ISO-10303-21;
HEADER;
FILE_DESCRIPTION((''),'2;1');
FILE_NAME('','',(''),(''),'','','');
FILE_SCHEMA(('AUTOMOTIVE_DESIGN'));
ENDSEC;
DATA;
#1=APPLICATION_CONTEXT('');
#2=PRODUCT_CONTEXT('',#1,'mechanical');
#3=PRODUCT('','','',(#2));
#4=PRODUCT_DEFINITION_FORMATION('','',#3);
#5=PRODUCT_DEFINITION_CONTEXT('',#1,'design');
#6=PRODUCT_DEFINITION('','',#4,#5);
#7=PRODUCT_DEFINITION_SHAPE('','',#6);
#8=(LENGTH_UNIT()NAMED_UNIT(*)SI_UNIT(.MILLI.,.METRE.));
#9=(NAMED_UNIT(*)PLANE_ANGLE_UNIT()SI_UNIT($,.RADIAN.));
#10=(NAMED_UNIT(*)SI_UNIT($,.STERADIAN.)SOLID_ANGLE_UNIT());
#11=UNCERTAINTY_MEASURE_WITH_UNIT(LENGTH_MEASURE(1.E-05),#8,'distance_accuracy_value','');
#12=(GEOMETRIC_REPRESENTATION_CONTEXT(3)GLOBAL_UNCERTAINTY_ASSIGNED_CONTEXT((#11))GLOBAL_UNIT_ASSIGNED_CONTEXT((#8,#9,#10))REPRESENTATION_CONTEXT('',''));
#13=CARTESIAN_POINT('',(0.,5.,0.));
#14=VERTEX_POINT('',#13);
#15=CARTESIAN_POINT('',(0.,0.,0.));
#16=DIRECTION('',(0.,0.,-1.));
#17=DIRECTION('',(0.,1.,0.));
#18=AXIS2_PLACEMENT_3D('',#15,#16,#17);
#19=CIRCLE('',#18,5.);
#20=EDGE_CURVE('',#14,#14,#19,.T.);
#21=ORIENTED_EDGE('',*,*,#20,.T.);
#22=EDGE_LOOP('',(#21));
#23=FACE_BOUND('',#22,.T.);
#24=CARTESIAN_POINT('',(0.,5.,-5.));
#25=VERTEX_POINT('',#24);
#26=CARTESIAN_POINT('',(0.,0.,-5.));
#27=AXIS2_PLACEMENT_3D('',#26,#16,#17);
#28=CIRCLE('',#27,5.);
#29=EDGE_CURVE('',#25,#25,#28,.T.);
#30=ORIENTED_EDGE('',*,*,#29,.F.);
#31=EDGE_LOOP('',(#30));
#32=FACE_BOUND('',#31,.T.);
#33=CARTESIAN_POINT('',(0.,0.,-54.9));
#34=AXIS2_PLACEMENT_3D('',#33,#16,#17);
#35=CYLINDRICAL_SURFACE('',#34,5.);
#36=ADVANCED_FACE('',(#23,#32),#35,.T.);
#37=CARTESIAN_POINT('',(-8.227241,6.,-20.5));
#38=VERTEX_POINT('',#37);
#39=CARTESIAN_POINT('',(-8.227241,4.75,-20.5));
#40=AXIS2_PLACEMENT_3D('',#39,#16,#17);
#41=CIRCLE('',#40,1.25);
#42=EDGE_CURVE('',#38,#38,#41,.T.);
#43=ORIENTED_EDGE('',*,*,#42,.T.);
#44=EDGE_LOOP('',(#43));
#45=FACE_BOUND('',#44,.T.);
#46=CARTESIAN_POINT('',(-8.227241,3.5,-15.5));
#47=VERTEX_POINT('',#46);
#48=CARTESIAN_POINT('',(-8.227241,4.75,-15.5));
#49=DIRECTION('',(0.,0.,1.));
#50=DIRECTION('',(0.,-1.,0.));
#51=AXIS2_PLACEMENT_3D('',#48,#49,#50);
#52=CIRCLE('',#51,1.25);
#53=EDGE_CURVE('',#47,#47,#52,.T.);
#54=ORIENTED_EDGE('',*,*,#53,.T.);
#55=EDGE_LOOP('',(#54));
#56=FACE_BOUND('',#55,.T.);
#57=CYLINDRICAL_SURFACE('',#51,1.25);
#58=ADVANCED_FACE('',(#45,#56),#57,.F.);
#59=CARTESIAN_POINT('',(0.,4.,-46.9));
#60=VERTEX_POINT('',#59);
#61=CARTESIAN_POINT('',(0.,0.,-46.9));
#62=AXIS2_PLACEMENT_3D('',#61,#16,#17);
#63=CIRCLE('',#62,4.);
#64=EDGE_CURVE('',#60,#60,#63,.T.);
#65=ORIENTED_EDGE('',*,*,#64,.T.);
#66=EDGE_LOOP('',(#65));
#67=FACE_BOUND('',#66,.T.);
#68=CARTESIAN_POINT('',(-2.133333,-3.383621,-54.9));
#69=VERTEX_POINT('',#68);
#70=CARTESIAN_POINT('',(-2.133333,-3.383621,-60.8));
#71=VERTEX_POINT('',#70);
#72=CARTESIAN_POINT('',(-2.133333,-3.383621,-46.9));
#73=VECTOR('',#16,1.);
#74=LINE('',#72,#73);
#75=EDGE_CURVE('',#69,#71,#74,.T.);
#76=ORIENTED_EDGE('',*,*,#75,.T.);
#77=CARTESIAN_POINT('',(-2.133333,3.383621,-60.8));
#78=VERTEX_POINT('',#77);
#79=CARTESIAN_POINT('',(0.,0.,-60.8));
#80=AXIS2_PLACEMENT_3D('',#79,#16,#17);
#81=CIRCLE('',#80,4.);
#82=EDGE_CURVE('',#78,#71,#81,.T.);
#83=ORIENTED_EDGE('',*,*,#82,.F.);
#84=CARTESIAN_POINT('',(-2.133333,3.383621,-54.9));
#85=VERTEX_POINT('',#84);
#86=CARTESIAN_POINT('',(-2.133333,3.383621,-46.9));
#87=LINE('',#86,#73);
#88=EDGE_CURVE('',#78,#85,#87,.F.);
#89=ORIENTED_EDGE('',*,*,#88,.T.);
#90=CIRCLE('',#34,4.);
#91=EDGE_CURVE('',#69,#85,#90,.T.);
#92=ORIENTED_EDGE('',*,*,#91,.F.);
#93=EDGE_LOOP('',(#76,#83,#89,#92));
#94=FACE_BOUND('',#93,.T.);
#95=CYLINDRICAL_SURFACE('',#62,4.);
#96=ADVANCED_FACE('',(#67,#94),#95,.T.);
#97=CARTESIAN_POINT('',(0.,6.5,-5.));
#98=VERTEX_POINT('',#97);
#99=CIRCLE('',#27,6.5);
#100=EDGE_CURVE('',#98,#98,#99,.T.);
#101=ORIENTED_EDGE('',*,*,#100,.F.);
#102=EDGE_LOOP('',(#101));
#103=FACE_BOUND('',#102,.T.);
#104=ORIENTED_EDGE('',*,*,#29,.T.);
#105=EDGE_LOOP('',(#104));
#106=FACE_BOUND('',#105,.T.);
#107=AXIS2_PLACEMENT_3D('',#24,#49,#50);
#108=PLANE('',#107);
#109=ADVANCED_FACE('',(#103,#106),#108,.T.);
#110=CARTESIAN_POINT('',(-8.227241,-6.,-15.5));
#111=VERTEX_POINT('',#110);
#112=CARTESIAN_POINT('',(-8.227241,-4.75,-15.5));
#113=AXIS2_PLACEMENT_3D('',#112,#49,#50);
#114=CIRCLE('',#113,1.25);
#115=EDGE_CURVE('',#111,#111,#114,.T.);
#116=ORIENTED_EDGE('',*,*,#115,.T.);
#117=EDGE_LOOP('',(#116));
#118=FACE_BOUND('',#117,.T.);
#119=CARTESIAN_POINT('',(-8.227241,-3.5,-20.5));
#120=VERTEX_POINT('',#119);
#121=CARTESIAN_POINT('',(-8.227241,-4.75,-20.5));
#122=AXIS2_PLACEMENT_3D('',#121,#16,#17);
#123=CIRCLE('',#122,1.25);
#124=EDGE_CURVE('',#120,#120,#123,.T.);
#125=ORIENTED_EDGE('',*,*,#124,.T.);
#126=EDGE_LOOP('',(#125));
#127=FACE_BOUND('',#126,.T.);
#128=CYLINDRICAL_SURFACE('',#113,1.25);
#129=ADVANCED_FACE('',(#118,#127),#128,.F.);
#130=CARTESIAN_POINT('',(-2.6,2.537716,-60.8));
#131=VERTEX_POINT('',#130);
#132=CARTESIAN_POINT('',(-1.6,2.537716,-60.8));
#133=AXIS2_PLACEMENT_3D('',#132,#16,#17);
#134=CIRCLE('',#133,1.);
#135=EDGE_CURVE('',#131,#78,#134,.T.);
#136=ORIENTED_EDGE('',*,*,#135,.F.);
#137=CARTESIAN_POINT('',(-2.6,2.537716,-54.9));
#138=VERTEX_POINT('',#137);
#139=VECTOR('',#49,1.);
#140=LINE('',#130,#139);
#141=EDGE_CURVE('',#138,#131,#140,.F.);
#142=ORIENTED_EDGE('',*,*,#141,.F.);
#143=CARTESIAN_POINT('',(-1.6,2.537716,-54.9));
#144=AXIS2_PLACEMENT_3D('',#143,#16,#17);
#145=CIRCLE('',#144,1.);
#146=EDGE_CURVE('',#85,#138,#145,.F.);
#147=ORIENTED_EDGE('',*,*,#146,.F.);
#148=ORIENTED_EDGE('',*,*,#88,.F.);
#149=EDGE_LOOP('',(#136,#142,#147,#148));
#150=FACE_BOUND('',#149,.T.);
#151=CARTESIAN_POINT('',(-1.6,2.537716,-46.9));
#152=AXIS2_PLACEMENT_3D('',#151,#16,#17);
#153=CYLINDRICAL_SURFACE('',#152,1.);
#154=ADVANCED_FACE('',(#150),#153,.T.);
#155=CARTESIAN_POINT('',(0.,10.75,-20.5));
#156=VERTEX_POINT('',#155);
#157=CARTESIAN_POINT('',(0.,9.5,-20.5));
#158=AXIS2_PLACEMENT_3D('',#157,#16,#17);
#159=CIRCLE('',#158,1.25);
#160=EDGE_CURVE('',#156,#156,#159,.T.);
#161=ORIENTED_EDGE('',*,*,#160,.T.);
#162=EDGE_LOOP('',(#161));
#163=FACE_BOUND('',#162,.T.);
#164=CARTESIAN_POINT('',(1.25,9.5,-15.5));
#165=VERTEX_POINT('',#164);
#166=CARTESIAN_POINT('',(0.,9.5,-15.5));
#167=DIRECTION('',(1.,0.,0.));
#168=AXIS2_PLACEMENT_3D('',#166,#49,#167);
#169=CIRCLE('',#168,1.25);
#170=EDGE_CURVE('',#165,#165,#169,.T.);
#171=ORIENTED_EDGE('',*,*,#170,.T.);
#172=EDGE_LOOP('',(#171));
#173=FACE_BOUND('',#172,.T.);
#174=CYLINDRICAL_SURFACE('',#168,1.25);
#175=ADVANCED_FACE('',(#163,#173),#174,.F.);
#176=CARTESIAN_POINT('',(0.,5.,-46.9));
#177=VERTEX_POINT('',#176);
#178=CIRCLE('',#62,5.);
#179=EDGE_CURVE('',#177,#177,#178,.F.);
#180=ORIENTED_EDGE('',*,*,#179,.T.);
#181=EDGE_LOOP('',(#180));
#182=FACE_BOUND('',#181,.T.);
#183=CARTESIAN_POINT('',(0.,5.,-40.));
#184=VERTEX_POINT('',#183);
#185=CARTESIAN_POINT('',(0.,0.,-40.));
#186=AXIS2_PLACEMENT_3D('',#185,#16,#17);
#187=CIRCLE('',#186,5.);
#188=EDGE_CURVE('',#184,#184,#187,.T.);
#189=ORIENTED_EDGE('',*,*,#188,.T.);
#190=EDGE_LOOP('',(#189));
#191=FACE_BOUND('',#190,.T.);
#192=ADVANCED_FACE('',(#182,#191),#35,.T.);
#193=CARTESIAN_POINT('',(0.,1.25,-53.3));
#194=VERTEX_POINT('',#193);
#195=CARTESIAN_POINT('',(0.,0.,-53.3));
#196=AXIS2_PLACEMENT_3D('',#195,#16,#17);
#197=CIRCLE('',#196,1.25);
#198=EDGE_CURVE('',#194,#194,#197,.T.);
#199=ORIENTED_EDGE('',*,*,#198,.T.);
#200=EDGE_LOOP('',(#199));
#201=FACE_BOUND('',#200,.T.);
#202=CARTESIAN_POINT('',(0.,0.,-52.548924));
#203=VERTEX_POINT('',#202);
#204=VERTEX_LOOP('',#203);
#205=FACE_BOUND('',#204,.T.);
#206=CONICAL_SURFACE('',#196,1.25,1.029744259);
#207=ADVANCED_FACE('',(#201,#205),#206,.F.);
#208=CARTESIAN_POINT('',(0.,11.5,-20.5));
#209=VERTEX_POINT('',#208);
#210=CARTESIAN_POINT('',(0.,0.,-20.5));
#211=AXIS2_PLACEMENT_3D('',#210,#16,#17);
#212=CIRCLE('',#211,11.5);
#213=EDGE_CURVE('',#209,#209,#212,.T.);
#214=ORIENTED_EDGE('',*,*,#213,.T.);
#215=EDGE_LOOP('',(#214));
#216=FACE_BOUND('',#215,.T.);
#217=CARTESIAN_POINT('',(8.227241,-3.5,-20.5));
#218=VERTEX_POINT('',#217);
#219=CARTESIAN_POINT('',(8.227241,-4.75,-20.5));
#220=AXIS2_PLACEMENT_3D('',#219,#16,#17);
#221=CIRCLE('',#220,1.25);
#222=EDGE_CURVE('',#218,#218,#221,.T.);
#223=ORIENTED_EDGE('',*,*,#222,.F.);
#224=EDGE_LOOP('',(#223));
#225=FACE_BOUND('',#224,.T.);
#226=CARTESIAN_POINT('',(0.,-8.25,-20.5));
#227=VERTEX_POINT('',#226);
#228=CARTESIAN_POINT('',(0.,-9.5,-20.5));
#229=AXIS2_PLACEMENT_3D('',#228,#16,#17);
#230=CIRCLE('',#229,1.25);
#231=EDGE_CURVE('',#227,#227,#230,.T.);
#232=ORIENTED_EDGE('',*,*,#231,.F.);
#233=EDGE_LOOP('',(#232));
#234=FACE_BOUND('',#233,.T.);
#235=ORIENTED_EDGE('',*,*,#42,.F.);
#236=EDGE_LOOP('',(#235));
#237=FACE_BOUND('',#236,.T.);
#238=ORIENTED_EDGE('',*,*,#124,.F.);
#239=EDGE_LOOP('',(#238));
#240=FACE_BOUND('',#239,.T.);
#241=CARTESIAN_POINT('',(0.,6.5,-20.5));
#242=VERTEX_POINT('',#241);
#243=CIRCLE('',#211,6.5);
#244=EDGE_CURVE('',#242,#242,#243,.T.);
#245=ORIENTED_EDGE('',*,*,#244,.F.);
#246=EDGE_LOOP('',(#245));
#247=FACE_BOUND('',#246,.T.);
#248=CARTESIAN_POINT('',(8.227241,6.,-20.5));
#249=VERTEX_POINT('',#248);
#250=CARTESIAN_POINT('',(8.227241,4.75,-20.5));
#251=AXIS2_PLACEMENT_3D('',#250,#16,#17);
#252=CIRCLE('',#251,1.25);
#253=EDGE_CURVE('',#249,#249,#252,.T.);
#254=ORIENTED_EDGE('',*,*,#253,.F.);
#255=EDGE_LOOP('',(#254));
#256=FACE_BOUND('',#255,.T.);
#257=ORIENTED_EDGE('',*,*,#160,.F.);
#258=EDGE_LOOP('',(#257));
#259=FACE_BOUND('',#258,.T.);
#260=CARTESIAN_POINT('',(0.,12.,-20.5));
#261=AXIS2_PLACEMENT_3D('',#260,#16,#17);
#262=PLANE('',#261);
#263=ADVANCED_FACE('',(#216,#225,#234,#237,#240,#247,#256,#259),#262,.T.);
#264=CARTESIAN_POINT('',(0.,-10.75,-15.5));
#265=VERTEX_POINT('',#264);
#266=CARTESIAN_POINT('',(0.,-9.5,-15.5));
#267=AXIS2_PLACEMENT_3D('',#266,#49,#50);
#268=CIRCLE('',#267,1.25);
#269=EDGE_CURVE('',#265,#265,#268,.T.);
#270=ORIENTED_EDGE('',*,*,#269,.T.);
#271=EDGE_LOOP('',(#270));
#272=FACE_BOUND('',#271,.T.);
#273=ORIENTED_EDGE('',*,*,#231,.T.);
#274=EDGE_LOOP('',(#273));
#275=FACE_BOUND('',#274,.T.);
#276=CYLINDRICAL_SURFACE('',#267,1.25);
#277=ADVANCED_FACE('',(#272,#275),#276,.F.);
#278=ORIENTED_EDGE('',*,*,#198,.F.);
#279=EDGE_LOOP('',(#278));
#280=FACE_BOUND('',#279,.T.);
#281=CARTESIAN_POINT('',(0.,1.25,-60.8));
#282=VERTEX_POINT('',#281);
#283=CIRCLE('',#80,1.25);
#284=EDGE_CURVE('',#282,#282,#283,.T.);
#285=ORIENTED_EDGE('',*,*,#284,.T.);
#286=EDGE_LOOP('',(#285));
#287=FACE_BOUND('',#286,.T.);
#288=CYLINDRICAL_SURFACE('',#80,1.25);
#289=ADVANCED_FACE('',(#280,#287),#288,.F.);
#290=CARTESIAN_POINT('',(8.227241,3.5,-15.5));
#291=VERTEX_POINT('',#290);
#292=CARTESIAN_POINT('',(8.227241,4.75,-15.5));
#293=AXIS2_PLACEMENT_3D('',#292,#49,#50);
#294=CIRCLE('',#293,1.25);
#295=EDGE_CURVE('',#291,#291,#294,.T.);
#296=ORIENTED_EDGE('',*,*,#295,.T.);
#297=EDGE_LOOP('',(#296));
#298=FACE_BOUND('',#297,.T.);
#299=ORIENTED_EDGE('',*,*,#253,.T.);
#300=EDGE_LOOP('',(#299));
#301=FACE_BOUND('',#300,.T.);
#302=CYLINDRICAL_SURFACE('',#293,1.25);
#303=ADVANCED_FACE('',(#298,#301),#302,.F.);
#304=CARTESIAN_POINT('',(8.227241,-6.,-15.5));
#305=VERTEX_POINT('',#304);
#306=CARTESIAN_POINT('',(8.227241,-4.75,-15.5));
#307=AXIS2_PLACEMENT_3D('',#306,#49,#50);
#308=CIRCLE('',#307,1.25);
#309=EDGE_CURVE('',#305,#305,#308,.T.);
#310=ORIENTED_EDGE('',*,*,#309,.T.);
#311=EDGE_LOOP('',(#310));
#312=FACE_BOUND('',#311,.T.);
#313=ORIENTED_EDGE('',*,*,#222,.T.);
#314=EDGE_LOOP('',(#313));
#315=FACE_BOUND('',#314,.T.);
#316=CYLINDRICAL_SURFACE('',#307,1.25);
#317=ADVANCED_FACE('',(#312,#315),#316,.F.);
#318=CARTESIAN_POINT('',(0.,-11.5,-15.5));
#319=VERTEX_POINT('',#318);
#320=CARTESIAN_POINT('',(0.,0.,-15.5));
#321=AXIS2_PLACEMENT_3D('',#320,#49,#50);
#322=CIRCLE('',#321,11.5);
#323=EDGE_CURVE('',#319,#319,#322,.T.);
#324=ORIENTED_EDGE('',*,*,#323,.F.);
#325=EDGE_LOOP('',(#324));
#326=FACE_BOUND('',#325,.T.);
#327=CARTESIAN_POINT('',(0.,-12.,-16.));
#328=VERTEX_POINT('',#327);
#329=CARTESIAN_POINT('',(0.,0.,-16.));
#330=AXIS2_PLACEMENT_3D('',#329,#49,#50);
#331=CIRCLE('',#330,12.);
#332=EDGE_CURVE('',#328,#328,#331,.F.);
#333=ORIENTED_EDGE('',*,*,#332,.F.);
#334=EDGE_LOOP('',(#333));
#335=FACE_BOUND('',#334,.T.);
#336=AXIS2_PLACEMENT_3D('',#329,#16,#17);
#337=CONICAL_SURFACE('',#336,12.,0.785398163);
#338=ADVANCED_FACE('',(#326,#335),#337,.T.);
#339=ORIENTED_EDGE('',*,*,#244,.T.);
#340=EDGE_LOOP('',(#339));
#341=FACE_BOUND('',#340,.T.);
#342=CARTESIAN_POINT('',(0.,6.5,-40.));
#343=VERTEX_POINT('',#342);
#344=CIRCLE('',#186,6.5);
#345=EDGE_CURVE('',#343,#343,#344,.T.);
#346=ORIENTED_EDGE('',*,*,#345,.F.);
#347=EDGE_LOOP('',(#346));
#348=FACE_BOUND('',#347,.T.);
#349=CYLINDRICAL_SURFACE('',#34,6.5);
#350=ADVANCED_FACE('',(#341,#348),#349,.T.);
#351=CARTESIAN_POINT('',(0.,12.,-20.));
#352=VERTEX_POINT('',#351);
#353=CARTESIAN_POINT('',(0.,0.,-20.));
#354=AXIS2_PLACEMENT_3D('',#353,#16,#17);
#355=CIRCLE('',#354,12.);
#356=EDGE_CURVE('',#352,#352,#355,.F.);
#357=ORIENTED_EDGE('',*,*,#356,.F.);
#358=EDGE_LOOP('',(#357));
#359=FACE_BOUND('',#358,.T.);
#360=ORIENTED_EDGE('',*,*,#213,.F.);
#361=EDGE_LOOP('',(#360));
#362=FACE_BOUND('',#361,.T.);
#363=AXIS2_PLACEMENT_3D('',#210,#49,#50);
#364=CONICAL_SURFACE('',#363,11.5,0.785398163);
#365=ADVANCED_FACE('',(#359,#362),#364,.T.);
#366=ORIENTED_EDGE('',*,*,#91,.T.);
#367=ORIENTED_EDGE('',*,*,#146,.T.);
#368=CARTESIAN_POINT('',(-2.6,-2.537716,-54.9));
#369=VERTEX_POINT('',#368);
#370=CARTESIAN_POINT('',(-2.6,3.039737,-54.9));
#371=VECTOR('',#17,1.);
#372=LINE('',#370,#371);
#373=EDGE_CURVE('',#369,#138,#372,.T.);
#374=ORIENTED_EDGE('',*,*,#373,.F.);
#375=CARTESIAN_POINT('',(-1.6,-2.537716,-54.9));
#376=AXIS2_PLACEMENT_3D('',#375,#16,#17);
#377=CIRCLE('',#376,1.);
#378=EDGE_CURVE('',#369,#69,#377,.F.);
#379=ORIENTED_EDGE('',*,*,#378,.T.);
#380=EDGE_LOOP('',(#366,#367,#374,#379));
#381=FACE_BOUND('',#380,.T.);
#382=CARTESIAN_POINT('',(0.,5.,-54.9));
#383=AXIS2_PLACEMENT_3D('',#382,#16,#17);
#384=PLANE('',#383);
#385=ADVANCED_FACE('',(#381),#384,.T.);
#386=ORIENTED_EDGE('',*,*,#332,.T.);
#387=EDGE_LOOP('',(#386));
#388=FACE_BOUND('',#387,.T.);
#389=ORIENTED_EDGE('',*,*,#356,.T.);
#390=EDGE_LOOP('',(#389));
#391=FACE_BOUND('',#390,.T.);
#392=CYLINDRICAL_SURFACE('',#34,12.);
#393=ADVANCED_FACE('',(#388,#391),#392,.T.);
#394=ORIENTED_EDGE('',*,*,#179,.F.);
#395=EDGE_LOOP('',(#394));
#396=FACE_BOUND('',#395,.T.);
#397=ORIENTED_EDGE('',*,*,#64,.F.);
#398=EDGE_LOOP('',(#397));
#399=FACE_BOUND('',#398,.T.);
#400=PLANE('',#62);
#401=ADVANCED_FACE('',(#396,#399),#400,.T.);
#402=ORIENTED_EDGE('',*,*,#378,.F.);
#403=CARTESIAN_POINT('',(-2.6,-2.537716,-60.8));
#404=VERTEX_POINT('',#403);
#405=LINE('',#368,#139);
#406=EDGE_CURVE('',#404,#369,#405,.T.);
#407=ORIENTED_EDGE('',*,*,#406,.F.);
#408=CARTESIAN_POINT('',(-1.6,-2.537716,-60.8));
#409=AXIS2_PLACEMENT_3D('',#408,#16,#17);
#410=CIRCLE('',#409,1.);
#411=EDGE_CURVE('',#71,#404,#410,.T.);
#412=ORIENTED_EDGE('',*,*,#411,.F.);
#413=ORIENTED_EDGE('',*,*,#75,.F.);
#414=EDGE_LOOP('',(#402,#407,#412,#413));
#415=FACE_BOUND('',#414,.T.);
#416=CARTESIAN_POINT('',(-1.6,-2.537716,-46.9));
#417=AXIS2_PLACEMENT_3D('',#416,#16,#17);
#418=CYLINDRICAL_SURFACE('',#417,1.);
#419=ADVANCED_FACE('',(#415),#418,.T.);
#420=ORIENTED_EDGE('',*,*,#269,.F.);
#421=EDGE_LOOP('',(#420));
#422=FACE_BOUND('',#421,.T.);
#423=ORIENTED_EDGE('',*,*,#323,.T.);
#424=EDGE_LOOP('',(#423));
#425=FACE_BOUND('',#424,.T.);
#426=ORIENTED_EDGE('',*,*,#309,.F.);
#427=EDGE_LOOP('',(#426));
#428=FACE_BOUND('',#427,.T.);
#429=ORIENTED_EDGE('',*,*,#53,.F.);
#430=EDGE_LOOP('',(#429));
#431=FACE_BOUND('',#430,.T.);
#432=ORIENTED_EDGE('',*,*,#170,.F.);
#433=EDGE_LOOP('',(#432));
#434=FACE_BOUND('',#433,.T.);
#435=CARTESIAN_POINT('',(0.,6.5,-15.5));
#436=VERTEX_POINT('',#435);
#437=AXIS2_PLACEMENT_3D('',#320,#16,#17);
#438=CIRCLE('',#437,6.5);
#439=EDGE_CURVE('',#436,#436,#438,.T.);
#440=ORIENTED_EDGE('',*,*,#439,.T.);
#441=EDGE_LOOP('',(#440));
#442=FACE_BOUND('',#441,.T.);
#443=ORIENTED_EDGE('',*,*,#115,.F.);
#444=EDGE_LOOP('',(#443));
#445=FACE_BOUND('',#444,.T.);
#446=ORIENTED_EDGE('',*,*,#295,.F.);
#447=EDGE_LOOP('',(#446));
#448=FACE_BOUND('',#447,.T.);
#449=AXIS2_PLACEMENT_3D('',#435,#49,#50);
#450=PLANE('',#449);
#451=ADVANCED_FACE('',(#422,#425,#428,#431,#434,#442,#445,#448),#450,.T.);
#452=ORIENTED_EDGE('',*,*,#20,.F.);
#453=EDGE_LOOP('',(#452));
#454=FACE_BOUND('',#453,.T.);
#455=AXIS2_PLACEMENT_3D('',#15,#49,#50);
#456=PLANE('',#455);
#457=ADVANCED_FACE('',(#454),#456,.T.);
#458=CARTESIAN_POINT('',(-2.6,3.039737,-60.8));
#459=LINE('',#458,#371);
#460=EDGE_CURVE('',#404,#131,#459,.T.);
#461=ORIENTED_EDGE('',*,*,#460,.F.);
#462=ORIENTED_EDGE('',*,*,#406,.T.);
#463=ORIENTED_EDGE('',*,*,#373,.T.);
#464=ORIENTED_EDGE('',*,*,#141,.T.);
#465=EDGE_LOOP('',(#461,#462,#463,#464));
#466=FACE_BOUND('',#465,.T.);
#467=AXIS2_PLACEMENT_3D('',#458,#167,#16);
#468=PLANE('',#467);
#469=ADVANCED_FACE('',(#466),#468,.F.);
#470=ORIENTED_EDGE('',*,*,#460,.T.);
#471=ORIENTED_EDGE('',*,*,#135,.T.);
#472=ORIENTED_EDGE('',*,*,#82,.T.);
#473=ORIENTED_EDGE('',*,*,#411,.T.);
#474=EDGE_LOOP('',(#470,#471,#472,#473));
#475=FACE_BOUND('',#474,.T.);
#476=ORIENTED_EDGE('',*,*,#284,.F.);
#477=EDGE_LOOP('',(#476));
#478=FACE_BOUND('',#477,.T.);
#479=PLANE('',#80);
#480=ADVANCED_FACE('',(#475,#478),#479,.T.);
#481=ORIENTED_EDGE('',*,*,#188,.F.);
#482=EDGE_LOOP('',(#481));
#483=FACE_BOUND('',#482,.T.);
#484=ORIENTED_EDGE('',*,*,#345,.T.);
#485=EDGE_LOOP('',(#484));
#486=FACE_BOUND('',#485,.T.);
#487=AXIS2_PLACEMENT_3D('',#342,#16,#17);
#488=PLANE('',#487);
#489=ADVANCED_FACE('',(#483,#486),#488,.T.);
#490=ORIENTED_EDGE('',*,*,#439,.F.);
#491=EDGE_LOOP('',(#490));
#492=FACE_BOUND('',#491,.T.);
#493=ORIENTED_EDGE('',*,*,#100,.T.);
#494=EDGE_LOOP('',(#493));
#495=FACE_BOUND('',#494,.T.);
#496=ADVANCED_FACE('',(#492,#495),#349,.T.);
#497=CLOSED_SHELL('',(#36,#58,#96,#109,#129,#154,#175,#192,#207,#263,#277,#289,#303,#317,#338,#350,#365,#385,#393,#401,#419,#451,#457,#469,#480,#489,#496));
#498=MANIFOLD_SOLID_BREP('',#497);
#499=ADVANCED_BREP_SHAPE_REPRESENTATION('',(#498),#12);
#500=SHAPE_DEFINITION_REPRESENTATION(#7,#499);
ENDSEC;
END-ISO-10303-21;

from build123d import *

# Parameters (mm, degrees)
HOLE_WIZARD_M3_1_D       = 2.5
PATTERN_CIRCULAR_1_COUNT = 6
CHAMFER_1_SIZE           = 0.5
SKETCH_5_OUTSIDE_W       = 38.908
SKETCH_5_OUTSIDE_H       = 38.908
SKETCH_5_OUTSIDE_R       = 4
CUT_EXTRUDE_1_DEPTH      = 8
EXTRUDE_START            = 5.9
EXTRUDE_1_DEPTH          = 5.9
HOLE_WIZARD_M3_2_D       = 2.5
HOLE_WIZARD_M3_2_DEPTH   = 7.5
HOLE_WIZARD_M3_2_TIP     = 0.7510757737844503
FILLET_1_R               = 1


with BuildPart() as part:
    # 草图1 → 旋转1 (revolve)
    with BuildSketch(Plane(origin=(0, 0, 0), x_dir=(0, 0, -1), z_dir=(1, 0, 0))):
        Polygon((0, 0), (0, 4.999999999999993), (5, 4.999999999999994), (5, 6.499999999999994), (15.5, 6.499999999999994), (15.5, 11.999999999999995), (20.5, 11.999999999999995), (20.5, 6.499999999999994), (40, 6.499999999999994), (40, 4.999999999999993), (54.900000000000006, 4.999999999999993), (54.900000000000006, 6.85e-15), align=None)
    revolve(axis=Axis((0, 6.85e-15, -54.900000000000006), (0, -1.2e-16, 1)))

    # M3 螺纹孔1 (through all)
    with Locations(Plane.XY.offset(-15.5)):
        with Locations((0, 9.5)):
            hole_wizard_m3_1 = Hole(HOLE_WIZARD_M3_1_D / 2)

    # 阵列(圆周)1: M3 螺纹孔1 ×6 about axis
    pattern_circular_1_axis = Axis((0, 6.85e-15, -54.900000000000006), (0, 1.2e-16, -1))
    for i in range(1, PATTERN_CIRCULAR_1_COUNT):
        add(hole_wizard_m3_1.rotate(pattern_circular_1_axis, i * 360 / PATTERN_CIRCULAR_1_COUNT), mode=Mode.SUBTRACT)

    # 倒角1
    chamfer_1_edges = [part.edges().sort_by_distance(p)[0] for p in [
        (-1.47e-15, -11.999999999999991, -15.500000000000002),
        (-1.47e-15, -11.999999999999991, -20.5),
    ]]
    chamfer(chamfer_1_edges, length=CHAMFER_1_SIZE)

    # 草图5 outside → 切除-拉伸1 (cut)
    with BuildSketch(Plane(origin=(0, 6.85e-15, -54.900000000000006), x_dir=(-1, 0, 0), z_dir=(0, 1.3e-16, -1))):
        Rectangle(SKETCH_5_OUTSIDE_W, SKETCH_5_OUTSIDE_H)
        Circle(SKETCH_5_OUTSIDE_R, mode=Mode.SUBTRACT)
    extrude(amount=-CUT_EXTRUDE_1_DEPTH, mode=Mode.SUBTRACT)

    # 草图6 → 凸台-拉伸1 (add)
    with BuildSketch(Plane(origin=(0, 6.85e-15, -54.900000000000006), x_dir=(-1, 0, 0), z_dir=(0, 1.2e-16, -1)).offset(EXTRUDE_START)):
        with BuildLine():
            Line((2.6000000000000005, 3.0397368307141326), (2.6000000000000005, -3.0397368307141326))
            ThreePointArc((2.6000000000000005, -3.0397368307141326), (-4, 4.9e-16), (2.6000000000000005, 3.0397368307141326))
        make_face()
    extrude(amount=-EXTRUDE_1_DEPTH)

    # M3 螺纹孔2
    with Locations(Plane(origin=(0, 7.58e-15, -60.800000000000004), x_dir=(-1, 0, 0), z_dir=(0, 1.2e-16, -1))):
        with Locations((0, 0)):
            Hole(HOLE_WIZARD_M3_2_D / 2, depth=HOLE_WIZARD_M3_2_DEPTH)
            with Locations((0, 0, -(HOLE_WIZARD_M3_2_DEPTH + HOLE_WIZARD_M3_2_TIP / 2))):  # 118° drill point
                Cone(0, HOLE_WIZARD_M3_2_D / 2, HOLE_WIZARD_M3_2_TIP, mode=Mode.SUBTRACT)

    # 圆角1
    fillet_1_edges = [part.edges().sort_by_distance(p)[0] for p in [
        (-2.6000000000000005, -3.0397368307141255, -57.85),
        (-2.6, 3.03973683071414, -57.85),
    ]]
    fillet(fillet_1_edges, radius=FILLET_1_R)


solid = part.part
